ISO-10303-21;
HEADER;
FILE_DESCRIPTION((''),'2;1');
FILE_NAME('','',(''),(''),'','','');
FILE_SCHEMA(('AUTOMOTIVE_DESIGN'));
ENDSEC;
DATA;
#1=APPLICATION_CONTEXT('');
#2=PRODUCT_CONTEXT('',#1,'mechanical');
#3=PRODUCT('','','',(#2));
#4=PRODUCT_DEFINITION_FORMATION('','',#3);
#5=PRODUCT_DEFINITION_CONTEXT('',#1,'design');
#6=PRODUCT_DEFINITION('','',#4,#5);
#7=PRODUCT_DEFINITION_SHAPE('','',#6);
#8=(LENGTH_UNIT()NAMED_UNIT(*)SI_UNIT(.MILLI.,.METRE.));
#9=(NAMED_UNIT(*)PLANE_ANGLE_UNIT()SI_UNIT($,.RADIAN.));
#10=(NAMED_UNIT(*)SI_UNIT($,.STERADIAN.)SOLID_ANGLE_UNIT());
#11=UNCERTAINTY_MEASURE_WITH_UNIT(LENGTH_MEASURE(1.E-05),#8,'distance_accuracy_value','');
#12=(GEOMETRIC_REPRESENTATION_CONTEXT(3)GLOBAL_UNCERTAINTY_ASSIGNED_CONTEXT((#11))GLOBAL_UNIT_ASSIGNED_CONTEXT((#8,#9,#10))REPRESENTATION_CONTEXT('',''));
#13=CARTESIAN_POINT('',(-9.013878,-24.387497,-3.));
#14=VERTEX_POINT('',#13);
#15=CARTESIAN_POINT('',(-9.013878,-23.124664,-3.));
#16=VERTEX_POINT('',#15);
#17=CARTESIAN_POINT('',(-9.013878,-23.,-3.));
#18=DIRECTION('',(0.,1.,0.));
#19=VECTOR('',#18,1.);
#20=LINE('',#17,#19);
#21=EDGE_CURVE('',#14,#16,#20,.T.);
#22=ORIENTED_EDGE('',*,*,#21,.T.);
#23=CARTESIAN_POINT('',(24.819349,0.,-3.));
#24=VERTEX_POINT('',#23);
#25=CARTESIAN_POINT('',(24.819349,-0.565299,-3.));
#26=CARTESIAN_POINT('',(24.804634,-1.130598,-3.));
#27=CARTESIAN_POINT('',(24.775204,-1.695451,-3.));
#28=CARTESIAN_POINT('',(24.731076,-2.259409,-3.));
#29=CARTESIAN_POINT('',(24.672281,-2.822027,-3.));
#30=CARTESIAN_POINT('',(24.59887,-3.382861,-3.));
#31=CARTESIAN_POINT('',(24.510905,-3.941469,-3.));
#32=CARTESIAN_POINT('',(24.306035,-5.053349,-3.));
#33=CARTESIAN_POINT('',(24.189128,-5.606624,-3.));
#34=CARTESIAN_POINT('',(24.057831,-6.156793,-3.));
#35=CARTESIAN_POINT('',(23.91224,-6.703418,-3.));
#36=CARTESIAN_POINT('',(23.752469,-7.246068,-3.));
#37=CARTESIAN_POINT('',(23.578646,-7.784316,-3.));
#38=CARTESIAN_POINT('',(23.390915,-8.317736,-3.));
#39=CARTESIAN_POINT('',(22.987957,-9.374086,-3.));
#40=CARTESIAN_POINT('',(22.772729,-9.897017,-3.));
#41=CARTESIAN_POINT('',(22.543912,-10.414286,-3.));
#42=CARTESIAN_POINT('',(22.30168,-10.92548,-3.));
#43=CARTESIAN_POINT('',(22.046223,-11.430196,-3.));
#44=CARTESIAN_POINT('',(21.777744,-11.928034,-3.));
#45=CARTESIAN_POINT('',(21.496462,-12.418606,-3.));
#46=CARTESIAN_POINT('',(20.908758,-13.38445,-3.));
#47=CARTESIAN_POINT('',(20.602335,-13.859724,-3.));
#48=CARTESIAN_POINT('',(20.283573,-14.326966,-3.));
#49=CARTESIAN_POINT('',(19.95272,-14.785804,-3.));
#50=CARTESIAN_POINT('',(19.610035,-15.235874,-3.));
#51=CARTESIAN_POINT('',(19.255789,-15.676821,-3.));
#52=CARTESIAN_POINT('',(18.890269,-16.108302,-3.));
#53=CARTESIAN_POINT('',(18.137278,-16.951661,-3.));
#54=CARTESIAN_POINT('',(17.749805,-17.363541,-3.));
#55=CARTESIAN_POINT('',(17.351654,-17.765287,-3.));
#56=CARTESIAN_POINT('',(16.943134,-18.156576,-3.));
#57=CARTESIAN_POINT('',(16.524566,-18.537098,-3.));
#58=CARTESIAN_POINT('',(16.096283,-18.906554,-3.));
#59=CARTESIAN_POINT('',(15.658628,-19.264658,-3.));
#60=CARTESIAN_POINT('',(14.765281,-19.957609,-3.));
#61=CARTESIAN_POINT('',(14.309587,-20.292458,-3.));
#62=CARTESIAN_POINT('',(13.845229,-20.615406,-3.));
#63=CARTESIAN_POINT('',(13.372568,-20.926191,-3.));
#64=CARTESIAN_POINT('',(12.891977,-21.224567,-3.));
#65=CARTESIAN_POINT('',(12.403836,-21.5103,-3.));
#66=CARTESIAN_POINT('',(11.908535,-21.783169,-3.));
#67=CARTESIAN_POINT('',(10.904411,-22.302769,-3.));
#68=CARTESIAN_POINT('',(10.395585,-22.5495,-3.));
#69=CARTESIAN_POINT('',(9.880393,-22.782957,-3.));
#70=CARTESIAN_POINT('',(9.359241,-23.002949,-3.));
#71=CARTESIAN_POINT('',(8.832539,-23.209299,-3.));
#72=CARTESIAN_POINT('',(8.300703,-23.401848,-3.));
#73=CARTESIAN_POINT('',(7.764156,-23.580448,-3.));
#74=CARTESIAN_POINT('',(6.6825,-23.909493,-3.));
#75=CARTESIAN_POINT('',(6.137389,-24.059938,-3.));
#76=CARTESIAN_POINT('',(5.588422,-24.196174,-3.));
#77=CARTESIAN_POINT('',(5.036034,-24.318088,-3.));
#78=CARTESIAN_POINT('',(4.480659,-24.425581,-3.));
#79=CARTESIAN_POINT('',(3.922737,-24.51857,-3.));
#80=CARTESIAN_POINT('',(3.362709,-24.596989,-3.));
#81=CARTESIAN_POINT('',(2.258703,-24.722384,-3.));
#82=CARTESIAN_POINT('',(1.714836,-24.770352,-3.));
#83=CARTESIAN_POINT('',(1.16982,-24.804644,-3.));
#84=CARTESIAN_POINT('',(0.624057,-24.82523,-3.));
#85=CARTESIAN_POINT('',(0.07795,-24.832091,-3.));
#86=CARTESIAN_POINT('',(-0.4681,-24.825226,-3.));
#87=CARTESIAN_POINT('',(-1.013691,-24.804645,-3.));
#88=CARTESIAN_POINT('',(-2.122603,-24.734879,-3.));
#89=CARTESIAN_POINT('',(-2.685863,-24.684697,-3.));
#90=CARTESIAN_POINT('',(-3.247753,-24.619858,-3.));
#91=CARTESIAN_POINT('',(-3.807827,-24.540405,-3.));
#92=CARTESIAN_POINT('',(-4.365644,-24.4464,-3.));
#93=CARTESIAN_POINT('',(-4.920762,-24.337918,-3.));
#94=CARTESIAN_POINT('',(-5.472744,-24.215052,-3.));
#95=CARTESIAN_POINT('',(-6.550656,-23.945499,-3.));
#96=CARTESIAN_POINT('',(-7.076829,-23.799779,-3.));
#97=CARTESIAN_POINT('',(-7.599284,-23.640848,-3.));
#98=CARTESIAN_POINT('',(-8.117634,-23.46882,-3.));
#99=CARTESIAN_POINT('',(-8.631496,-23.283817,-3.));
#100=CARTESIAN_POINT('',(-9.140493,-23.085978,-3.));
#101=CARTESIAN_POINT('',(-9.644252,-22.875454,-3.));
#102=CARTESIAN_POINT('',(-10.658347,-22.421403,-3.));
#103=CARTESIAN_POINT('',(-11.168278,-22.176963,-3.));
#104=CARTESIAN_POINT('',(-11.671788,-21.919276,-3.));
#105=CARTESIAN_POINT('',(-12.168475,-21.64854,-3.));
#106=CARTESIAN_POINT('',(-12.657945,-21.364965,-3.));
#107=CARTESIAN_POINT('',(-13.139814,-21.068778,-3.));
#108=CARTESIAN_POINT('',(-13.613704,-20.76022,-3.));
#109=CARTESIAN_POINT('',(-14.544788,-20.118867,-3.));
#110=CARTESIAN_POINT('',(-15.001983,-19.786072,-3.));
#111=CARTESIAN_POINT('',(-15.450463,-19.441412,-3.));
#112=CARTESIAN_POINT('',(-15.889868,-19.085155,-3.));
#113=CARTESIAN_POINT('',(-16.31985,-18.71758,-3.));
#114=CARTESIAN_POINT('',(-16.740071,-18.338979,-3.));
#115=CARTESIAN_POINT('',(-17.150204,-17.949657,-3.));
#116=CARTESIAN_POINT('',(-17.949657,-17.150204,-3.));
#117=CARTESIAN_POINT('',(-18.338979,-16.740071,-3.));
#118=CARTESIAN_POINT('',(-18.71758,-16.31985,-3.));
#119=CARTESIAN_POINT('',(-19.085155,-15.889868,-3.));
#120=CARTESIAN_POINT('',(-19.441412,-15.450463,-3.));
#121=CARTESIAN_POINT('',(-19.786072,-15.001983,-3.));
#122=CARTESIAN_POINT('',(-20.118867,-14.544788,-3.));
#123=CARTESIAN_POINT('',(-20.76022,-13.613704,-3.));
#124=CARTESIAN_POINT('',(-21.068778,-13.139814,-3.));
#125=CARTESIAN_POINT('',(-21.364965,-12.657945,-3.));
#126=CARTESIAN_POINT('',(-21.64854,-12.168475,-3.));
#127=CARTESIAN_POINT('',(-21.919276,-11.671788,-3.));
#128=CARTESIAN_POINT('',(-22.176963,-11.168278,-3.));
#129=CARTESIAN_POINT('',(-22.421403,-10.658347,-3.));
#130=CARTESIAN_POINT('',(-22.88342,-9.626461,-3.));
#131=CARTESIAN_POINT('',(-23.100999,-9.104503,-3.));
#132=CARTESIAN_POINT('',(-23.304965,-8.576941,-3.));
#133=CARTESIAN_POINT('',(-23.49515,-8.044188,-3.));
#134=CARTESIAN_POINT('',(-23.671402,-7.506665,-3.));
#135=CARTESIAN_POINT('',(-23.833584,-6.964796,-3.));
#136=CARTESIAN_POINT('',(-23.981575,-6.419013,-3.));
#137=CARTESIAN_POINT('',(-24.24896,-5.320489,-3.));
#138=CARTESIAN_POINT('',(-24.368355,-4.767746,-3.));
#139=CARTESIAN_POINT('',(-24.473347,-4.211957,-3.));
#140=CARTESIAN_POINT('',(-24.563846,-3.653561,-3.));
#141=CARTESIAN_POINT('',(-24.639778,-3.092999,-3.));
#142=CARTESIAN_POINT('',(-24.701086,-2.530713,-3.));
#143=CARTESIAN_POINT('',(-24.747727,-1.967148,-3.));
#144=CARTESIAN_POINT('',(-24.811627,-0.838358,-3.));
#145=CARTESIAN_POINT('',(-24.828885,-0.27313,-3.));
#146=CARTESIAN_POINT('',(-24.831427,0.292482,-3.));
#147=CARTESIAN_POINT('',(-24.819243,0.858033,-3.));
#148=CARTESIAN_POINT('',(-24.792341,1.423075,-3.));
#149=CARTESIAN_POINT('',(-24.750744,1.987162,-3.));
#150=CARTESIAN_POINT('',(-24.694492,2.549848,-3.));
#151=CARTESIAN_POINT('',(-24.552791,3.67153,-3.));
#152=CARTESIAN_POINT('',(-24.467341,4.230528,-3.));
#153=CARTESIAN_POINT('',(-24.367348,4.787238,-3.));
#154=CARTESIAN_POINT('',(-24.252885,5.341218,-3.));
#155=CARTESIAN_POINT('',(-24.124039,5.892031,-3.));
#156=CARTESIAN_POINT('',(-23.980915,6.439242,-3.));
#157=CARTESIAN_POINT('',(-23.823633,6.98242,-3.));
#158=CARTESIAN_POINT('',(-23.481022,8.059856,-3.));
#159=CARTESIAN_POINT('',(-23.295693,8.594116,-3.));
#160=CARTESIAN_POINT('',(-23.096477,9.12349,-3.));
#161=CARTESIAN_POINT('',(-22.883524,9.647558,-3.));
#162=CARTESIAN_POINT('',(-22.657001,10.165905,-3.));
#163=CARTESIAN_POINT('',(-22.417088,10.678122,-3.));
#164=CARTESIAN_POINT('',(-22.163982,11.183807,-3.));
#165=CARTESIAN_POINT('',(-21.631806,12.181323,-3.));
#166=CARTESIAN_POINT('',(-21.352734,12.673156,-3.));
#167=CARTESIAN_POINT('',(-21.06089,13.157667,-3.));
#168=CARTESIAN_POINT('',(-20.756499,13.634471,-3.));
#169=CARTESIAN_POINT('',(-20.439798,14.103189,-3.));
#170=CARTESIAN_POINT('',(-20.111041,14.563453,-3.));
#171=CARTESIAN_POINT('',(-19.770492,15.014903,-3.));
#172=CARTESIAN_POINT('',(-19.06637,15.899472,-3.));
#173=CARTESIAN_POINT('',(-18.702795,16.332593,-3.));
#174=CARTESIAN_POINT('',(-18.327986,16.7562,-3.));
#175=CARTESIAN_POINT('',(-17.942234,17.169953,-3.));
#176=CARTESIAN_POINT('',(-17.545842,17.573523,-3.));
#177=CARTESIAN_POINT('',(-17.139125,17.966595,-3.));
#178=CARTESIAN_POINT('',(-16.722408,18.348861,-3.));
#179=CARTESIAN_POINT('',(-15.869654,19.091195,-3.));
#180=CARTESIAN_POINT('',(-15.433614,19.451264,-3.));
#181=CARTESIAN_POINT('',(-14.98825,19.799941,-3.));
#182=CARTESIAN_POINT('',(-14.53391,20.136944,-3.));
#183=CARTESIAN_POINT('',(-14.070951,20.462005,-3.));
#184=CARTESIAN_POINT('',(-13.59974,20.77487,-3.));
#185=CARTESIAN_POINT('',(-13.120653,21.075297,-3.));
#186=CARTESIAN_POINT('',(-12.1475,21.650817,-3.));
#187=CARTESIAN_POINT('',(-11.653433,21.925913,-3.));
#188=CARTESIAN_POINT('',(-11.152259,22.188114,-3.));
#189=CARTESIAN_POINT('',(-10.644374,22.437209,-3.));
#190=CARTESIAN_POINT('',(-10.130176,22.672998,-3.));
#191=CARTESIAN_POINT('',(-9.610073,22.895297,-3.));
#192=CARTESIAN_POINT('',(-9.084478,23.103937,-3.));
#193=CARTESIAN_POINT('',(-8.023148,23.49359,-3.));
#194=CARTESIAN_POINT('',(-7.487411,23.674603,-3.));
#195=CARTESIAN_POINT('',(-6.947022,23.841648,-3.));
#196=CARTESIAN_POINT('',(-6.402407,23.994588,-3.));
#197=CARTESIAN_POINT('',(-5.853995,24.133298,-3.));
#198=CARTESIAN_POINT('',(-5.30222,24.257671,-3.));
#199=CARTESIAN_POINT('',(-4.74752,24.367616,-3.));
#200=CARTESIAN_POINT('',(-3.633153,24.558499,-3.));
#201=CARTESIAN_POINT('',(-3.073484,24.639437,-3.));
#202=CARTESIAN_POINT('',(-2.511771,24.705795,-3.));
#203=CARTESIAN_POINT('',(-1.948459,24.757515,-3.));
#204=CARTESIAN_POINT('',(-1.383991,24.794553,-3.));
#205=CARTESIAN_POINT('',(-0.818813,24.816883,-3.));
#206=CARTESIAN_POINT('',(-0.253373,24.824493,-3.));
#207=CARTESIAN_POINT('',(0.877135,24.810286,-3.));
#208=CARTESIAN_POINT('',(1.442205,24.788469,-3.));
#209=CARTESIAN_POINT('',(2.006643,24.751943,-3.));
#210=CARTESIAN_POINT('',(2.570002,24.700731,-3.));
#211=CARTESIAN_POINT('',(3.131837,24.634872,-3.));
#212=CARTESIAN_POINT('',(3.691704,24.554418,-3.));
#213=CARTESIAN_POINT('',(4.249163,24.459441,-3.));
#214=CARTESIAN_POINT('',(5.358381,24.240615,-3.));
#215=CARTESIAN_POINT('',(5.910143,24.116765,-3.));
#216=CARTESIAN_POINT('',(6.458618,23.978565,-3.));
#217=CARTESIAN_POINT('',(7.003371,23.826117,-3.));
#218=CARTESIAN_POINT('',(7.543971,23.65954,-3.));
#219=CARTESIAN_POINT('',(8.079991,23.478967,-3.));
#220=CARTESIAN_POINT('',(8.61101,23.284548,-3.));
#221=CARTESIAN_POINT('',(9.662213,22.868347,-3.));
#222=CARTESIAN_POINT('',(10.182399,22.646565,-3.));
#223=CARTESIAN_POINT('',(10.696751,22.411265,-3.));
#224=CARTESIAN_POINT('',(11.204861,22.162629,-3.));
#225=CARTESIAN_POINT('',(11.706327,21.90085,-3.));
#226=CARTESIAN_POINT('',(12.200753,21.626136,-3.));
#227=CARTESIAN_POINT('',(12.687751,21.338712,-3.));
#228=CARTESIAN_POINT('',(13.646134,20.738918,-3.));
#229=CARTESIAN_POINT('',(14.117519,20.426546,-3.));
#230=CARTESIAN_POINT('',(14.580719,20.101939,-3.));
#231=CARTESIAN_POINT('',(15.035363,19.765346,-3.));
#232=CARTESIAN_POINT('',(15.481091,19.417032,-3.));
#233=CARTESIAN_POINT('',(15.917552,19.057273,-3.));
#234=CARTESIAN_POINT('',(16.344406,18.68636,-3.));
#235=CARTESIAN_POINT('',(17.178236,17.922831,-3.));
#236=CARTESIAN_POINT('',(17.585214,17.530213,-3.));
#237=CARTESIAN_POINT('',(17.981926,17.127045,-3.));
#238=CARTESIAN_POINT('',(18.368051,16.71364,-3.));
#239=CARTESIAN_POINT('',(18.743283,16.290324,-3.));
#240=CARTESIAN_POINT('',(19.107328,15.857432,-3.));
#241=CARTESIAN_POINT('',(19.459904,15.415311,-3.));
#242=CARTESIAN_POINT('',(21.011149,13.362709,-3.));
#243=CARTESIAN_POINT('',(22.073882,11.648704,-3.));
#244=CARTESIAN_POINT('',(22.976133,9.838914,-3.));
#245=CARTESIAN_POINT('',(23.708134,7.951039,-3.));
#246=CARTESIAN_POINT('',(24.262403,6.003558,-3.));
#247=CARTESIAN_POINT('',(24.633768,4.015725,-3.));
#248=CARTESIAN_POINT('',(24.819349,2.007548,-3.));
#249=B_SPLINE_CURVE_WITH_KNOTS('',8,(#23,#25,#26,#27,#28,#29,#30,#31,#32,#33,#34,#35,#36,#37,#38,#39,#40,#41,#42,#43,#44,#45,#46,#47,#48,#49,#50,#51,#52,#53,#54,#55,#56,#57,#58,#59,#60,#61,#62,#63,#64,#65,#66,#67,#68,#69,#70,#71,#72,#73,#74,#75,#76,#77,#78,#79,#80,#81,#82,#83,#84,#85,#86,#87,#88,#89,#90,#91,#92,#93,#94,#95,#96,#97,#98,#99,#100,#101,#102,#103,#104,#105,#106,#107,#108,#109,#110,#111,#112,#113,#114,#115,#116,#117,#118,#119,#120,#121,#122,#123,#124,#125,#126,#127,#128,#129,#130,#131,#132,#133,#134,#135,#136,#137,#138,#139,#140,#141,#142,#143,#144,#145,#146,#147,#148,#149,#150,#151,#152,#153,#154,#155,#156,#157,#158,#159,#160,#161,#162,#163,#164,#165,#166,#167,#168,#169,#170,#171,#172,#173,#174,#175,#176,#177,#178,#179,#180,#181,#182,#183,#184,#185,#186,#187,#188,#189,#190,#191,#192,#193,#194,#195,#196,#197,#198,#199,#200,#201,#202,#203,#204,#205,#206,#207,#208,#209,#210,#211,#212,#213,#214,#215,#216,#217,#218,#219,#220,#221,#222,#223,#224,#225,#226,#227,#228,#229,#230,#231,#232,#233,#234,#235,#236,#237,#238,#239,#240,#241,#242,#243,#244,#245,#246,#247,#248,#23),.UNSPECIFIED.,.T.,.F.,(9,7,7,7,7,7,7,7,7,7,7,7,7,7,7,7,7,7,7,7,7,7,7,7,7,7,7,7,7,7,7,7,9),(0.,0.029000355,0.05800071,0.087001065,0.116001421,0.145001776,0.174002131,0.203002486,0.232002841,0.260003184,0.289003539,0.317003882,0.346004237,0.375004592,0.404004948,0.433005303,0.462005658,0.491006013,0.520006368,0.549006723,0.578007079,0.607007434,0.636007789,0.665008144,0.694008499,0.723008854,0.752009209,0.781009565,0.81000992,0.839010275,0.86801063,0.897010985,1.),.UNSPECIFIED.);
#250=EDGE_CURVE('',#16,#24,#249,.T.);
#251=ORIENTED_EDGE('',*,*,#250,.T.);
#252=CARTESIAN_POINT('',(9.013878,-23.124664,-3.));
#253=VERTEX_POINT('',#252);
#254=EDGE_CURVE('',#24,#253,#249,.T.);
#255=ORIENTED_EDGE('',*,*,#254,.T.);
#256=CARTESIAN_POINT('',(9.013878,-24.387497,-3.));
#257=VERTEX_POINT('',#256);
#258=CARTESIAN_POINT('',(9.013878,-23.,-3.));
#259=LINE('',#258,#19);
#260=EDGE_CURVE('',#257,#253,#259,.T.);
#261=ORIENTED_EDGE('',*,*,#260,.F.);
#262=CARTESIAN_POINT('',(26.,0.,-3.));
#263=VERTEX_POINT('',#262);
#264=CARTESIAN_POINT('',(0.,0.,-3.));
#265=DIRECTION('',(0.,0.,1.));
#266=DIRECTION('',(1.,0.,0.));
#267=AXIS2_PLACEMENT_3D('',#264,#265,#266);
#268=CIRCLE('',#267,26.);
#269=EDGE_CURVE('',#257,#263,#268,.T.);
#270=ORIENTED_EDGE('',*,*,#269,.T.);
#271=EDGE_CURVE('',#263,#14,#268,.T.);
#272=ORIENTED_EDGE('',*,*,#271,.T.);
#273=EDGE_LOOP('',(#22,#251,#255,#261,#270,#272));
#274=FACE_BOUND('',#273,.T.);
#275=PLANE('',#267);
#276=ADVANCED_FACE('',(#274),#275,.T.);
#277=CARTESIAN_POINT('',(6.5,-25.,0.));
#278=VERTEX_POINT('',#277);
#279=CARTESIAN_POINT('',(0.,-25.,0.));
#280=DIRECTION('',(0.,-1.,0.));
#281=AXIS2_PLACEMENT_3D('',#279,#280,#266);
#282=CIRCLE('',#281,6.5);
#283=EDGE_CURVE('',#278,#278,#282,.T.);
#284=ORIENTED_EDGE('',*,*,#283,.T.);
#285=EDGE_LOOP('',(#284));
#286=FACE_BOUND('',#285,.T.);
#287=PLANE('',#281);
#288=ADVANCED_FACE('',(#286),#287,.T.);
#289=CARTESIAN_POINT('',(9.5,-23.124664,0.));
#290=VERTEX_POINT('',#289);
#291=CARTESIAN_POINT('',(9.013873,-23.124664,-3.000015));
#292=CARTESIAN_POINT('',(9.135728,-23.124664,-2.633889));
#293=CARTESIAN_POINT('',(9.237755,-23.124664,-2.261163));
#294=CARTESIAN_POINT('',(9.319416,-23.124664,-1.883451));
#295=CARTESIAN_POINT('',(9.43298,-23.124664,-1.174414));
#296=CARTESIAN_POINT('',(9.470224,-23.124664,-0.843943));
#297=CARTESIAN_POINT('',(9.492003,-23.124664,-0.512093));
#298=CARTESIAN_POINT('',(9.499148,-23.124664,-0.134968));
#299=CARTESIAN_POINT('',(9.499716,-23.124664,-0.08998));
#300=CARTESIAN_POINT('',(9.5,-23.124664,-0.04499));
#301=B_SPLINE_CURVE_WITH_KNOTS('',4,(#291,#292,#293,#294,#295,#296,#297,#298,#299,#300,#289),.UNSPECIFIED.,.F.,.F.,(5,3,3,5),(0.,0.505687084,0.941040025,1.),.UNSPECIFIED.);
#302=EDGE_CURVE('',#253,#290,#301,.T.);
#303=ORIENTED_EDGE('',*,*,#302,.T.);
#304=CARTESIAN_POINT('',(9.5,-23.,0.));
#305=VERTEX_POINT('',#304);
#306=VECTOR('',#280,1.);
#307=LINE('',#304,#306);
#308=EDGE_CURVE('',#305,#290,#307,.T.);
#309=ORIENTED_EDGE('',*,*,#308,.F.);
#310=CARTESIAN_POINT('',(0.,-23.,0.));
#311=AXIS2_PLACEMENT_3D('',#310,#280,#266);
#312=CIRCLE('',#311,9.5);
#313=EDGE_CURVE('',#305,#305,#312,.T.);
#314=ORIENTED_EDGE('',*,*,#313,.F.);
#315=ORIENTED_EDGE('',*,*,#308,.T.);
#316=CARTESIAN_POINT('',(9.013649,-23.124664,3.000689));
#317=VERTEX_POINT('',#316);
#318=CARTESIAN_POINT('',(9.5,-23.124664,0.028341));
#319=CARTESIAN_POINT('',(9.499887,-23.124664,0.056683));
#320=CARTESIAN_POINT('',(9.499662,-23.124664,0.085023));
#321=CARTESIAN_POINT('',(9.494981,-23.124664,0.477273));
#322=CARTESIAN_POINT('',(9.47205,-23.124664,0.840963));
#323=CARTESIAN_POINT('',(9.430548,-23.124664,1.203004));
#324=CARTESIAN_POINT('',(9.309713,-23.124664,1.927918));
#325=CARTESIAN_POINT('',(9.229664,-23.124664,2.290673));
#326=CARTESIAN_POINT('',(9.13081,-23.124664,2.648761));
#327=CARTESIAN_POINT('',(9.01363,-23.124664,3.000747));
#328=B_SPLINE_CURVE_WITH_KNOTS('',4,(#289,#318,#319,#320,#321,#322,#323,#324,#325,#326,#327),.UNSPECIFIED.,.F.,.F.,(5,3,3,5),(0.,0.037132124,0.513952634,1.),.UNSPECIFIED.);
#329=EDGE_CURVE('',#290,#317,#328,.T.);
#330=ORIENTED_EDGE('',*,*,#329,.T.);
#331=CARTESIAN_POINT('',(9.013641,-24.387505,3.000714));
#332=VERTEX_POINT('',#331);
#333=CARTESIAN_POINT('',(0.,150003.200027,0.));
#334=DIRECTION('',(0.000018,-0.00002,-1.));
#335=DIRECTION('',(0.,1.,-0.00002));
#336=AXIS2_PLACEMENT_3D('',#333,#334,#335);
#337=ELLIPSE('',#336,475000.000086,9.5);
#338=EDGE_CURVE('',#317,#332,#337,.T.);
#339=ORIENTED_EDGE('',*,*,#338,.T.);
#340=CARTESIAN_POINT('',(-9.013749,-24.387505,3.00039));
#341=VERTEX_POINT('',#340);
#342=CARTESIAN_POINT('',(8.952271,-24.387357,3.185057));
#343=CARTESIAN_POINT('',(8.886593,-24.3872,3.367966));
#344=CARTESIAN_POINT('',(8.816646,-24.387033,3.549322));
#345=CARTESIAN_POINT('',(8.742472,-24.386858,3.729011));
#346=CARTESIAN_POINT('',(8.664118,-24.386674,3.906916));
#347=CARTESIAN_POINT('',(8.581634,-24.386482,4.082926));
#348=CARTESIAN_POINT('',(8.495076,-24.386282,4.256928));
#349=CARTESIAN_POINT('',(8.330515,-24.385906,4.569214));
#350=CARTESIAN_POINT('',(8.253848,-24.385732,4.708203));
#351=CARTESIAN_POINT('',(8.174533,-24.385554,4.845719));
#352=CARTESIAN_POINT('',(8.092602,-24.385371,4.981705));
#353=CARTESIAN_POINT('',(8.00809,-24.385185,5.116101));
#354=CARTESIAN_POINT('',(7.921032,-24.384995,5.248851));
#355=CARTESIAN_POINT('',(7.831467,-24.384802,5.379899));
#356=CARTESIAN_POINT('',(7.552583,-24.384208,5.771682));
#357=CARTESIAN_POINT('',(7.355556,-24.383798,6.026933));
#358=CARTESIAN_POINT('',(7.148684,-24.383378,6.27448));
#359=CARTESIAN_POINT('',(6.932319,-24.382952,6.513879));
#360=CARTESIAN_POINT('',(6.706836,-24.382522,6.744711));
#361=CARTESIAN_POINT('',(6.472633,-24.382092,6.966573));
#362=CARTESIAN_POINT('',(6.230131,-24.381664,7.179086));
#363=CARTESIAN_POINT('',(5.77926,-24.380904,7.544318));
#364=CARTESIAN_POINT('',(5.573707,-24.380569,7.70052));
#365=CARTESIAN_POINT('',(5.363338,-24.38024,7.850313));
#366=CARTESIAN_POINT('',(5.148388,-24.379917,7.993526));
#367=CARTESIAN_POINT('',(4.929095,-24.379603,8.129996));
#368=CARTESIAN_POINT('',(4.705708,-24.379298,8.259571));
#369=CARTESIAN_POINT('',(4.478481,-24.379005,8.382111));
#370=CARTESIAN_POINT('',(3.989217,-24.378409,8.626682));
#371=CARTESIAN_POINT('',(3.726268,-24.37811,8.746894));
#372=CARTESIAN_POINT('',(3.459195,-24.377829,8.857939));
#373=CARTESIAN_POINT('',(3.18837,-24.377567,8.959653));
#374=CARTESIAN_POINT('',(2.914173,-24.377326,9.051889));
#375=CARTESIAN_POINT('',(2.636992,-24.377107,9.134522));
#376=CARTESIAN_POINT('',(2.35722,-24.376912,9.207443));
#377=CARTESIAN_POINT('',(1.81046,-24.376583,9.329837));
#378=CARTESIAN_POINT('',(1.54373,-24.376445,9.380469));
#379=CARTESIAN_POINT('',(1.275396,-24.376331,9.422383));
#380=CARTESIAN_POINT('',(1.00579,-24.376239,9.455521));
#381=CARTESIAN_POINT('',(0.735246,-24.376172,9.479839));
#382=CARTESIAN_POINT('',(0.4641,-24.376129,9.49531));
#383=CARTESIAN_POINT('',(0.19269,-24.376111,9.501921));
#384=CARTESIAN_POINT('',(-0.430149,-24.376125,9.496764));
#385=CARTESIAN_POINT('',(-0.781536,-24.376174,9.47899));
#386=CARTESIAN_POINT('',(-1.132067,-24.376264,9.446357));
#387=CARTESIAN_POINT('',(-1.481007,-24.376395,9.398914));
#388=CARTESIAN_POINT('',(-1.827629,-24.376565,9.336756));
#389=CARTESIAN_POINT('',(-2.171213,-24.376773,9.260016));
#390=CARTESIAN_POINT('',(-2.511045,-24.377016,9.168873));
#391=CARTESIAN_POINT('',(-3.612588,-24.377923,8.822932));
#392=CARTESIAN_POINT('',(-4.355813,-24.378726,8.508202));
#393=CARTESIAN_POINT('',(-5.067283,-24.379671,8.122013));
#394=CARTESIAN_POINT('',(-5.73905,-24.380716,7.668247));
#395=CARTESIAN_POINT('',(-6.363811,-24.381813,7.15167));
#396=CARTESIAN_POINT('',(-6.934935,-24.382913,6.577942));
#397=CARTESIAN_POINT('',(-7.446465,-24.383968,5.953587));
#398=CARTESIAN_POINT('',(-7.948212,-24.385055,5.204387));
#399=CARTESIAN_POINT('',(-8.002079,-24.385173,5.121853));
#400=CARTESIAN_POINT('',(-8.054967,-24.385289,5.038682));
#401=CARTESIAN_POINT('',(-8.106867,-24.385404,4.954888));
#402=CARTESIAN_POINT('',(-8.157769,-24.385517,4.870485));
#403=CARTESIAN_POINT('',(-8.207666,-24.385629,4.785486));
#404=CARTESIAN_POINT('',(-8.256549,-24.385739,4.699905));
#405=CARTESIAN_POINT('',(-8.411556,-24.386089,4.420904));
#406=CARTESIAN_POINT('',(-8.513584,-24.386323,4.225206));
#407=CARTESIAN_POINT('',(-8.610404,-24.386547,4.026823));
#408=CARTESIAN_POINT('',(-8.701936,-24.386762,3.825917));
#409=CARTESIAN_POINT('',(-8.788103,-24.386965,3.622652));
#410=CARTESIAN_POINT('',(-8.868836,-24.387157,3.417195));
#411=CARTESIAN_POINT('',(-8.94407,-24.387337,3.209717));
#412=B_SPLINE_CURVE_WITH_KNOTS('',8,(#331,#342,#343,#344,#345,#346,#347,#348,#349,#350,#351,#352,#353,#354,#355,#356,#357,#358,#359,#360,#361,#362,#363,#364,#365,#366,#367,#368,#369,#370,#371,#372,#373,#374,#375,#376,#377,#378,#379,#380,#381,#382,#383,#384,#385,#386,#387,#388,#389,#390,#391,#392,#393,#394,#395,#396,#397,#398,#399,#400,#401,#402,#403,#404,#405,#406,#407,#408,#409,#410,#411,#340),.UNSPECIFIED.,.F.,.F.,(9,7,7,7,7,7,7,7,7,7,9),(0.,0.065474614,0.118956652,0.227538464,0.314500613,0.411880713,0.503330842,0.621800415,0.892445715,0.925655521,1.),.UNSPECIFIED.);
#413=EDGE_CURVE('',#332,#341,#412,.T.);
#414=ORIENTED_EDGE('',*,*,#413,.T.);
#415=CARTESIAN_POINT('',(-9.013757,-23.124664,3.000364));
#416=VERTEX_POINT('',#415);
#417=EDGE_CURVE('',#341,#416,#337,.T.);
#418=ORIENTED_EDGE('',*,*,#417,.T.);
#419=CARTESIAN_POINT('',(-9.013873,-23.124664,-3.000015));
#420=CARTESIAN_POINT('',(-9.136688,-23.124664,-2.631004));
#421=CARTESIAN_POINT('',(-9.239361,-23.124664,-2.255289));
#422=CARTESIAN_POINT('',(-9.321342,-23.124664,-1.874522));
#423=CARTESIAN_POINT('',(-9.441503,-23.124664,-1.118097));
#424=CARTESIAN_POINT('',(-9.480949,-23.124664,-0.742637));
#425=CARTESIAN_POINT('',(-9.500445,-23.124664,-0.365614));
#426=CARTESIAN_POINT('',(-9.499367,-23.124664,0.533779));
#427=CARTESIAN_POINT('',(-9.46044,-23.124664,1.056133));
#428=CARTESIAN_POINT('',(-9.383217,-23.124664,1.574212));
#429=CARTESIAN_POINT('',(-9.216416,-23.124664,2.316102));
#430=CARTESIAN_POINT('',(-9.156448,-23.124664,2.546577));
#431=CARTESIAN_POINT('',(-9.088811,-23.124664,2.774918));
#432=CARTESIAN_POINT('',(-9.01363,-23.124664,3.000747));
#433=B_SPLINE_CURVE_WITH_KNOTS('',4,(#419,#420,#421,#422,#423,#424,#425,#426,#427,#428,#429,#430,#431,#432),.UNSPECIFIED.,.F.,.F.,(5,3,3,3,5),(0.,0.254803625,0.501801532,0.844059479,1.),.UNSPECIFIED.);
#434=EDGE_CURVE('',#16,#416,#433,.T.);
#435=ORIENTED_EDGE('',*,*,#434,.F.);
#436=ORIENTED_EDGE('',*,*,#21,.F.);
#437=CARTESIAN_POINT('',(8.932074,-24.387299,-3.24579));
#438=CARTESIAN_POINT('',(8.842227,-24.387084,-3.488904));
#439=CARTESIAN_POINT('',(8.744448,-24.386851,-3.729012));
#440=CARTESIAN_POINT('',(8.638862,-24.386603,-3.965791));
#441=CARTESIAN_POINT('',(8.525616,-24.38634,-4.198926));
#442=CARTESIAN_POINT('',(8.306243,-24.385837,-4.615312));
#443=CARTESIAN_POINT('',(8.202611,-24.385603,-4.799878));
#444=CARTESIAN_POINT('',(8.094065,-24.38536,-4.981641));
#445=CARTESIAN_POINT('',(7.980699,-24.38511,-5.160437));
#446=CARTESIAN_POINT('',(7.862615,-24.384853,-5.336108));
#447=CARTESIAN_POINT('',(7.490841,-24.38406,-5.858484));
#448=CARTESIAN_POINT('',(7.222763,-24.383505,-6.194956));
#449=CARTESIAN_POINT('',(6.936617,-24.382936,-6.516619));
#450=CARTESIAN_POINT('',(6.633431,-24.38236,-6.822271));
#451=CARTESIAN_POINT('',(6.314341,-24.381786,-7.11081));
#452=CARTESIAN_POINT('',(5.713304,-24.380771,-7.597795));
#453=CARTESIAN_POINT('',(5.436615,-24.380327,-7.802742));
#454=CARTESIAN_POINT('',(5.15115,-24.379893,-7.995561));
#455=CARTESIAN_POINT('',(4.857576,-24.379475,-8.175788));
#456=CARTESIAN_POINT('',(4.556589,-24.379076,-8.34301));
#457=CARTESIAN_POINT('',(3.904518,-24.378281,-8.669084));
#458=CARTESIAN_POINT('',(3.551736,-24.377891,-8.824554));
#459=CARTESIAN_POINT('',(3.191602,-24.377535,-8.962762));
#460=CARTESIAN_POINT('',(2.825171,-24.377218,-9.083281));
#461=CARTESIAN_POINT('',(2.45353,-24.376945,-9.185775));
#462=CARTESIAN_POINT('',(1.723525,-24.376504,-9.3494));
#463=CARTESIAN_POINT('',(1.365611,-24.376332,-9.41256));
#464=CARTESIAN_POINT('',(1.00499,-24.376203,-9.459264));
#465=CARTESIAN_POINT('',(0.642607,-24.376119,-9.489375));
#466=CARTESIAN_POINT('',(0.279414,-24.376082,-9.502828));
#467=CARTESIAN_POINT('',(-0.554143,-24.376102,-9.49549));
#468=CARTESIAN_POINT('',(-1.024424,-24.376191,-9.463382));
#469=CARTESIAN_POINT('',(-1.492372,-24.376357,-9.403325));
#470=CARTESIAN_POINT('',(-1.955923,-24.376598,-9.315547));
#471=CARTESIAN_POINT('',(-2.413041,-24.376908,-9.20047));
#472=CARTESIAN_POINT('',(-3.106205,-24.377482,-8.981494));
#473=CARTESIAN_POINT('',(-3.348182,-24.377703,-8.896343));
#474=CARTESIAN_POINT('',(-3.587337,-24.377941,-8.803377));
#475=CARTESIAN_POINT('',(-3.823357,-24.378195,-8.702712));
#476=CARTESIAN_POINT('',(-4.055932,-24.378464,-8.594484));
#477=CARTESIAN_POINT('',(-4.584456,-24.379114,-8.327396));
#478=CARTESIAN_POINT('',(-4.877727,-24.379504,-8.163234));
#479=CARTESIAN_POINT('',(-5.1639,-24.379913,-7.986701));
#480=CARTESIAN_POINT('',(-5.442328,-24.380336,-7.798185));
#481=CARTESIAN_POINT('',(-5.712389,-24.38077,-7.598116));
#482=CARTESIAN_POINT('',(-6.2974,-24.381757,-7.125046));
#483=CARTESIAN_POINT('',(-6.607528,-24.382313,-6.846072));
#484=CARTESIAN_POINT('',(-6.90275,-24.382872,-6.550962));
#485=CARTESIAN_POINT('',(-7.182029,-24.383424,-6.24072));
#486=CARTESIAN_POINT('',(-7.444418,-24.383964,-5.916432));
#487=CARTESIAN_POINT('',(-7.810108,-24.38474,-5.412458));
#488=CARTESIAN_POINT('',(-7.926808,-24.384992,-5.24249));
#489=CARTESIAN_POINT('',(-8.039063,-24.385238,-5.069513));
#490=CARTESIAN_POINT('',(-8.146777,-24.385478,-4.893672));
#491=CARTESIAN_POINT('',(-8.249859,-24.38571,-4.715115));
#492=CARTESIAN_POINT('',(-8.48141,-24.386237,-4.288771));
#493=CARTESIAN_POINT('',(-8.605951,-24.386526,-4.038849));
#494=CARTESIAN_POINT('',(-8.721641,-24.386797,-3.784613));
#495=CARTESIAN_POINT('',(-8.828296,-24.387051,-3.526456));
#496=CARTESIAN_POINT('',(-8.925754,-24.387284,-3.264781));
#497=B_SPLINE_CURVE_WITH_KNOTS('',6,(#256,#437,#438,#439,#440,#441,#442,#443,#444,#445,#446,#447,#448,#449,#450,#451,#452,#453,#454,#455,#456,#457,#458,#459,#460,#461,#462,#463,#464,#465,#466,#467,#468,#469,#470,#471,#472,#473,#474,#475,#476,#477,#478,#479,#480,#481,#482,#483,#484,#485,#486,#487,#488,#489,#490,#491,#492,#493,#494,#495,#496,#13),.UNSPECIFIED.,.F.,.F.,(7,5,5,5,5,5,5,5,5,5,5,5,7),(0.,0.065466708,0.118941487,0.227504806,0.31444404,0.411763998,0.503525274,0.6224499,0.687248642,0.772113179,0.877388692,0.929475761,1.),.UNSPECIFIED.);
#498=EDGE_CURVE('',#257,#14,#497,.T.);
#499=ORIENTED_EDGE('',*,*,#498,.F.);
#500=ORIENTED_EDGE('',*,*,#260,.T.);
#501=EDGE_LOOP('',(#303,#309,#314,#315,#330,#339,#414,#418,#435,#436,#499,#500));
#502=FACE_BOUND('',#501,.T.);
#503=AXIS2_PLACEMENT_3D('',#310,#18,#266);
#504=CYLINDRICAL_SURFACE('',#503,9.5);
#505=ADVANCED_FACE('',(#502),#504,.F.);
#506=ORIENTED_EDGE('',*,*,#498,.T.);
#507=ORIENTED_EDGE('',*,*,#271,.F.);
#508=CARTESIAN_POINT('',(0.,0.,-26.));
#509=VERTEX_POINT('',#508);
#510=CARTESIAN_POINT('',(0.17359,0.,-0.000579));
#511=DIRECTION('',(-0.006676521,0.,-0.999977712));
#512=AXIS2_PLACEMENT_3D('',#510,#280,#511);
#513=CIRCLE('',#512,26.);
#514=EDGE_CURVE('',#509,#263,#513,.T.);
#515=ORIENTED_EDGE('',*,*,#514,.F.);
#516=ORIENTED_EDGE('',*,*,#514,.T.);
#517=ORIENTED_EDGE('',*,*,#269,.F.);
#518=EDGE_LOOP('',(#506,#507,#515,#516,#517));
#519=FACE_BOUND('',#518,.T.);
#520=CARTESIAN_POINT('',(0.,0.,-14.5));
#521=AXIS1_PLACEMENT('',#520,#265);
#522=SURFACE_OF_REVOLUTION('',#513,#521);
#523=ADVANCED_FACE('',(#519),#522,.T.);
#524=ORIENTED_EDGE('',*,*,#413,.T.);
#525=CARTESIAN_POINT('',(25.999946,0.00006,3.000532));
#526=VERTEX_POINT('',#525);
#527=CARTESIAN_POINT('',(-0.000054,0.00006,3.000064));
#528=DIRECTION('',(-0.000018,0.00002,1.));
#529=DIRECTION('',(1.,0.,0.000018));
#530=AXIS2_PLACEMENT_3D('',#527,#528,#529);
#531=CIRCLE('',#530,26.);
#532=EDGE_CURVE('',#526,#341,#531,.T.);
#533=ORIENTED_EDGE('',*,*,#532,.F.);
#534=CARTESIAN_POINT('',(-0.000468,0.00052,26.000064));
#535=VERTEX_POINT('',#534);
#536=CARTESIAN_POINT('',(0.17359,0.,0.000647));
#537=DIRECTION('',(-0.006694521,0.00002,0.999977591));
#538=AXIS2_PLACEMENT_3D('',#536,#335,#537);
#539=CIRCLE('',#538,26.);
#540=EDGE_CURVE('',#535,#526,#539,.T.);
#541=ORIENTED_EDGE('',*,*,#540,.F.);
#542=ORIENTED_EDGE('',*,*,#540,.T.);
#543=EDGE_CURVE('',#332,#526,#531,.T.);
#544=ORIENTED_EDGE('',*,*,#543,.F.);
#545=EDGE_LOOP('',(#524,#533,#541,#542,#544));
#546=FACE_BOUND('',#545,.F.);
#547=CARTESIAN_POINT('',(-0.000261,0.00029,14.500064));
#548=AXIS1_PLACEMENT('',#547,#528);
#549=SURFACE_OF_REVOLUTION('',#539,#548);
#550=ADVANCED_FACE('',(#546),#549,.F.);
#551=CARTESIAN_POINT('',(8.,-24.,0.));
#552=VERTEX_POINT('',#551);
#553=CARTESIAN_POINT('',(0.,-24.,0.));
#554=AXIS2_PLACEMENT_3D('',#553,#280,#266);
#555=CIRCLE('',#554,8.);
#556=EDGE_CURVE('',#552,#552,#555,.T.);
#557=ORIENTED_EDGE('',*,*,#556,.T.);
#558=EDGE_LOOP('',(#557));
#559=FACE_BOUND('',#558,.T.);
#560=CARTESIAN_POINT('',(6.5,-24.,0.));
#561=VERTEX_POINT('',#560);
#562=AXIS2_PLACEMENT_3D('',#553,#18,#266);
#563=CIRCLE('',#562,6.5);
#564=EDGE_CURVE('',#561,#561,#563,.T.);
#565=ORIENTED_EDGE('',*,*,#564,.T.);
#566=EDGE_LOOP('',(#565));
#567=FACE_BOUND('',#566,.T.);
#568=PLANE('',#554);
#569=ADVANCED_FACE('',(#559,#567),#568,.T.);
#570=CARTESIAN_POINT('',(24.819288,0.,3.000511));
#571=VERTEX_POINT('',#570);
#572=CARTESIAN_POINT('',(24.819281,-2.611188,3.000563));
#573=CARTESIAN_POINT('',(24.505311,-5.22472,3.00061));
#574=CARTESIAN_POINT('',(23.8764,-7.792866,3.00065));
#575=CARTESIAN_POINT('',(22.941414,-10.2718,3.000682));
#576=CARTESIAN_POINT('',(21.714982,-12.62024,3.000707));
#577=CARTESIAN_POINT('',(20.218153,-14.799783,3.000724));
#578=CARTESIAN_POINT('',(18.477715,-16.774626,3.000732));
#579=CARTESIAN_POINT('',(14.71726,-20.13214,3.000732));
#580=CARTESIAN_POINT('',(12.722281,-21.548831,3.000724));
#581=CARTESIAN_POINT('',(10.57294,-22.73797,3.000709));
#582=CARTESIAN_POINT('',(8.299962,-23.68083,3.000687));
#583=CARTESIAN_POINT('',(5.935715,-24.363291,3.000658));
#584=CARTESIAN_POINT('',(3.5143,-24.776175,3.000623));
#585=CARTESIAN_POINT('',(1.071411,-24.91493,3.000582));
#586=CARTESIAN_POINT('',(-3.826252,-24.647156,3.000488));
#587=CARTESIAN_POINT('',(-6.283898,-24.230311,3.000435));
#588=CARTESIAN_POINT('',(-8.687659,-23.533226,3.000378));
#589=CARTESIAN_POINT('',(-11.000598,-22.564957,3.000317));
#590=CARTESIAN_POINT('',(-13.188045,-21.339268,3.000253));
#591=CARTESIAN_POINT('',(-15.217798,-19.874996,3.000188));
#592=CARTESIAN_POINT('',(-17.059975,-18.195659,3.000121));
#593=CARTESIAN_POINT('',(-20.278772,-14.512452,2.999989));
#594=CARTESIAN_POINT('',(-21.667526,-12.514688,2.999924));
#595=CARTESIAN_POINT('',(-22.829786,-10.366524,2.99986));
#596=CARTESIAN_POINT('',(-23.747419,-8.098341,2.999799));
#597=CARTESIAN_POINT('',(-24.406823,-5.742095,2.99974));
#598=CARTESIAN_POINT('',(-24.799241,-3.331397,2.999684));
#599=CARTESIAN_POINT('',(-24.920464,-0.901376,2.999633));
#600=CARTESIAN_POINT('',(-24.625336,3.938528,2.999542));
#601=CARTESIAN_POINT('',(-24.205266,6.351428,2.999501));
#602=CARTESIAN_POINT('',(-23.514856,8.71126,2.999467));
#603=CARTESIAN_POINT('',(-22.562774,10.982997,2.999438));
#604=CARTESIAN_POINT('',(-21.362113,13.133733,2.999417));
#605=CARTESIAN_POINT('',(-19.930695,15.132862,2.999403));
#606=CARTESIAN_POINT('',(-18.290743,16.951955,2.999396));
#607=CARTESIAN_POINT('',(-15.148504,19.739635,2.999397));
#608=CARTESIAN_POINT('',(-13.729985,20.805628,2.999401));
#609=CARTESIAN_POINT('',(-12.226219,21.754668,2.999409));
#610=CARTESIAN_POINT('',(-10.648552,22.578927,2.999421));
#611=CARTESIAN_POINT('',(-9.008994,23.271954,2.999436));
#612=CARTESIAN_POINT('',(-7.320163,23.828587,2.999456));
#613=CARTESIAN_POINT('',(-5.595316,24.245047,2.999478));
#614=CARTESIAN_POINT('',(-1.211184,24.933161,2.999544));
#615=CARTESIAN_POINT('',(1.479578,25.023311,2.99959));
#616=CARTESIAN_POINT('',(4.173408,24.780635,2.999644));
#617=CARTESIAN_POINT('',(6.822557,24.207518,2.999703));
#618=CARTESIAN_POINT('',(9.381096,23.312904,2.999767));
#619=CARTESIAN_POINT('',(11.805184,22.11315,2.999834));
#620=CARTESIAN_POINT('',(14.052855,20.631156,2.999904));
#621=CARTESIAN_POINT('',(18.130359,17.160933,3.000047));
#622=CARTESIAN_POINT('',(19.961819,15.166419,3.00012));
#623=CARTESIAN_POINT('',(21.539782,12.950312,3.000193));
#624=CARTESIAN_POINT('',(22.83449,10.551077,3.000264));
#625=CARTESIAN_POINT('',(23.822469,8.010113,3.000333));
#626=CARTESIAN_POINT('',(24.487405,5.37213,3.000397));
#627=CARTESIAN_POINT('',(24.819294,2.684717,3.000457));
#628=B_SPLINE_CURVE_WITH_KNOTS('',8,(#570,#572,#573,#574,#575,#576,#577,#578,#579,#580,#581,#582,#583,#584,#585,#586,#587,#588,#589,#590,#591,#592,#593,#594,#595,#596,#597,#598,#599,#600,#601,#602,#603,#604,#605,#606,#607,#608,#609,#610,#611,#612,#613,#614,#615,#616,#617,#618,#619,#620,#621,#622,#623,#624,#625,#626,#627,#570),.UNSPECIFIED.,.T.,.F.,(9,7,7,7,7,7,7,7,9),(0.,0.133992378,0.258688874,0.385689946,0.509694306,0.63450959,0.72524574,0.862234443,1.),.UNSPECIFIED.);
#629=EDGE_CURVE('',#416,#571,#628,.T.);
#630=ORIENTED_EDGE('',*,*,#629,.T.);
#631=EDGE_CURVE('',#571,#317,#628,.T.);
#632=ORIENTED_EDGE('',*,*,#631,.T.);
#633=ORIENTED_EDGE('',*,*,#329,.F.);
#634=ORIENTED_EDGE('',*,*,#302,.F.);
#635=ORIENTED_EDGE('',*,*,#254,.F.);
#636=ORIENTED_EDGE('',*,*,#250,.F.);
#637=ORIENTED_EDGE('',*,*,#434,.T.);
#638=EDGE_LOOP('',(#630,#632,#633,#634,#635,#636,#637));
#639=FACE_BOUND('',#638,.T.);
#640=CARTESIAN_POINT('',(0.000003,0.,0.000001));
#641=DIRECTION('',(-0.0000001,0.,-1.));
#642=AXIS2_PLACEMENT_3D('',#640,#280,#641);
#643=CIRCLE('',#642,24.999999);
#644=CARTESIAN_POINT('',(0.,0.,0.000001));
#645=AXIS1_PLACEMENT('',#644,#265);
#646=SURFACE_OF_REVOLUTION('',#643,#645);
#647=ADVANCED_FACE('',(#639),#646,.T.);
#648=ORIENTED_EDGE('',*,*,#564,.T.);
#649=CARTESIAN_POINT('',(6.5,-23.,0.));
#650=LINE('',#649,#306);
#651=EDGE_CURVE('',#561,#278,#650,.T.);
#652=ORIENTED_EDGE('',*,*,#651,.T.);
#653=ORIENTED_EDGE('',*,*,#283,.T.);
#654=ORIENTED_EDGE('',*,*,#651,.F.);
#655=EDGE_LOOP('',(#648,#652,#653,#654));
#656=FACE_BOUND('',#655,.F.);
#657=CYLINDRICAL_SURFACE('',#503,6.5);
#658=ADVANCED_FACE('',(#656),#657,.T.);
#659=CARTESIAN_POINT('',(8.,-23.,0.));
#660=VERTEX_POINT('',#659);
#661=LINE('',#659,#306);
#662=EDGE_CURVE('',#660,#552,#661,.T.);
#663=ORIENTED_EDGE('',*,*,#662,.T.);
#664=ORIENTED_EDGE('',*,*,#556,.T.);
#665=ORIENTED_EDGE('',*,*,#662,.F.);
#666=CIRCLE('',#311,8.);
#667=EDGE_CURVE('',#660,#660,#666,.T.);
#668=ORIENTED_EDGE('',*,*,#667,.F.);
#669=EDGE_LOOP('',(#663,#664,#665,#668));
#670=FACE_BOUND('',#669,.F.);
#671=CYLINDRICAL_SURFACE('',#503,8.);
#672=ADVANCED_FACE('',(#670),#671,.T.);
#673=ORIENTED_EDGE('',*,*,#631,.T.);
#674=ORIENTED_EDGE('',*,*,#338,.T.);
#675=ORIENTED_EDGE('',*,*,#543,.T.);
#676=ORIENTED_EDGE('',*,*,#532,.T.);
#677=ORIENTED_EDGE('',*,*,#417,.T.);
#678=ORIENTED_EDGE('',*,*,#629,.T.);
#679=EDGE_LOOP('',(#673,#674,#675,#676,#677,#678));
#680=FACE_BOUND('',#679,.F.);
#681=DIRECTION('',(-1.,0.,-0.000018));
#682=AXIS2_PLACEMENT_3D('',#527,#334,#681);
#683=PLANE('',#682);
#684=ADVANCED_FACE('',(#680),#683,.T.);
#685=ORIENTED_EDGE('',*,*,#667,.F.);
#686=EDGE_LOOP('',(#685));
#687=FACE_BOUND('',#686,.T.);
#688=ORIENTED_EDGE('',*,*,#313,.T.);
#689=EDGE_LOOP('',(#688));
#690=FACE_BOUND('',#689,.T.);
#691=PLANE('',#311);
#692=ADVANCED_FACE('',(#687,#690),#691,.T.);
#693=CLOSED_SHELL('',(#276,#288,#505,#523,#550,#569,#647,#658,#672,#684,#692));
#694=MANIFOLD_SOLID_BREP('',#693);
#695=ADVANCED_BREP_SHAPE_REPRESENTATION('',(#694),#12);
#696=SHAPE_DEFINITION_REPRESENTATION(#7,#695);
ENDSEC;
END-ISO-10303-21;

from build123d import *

# Parameters (mm, degrees)
F5_R      = 9.5
F6_DEPTH  = 20
F7_R      = 8
F8_DEPTH  = 1
F9_R      = 6.5
F10_DEPTH = 2


# Not quite as in the source:
# - ends of sketch curves that miss each other by under 0.0002 mm in the source are joined
# - a pattern or mirror of a feature is missing from the dataset's text; its kind, count and spacing are read off the source's solid


with BuildPart() as f1:
    # F0 (on Front) → F1 (revolve)
    with BuildSketch(Plane.XZ):
        with BuildLine():
            Line((0, 25), (0, -24.9999989992))
            ThreePointArc((0, -24.9999989992), (25.0000020016, 0), (0, 25))
        make_face()
    revolve(axis=Axis((0, 0, 5.004e-07), (0, 0, 1)))

    # F2 (on Front) → F3 (revolve)
    with BuildSketch(Plane.XZ):
        with BuildLine():
            Line((0, -3), (0, -26))
            ThreePointArc((0, -26), (17.4005104893, -19.4744901184), (26, -3))
            Line((26, -3), (0, -3))
        make_face()
    f3 = revolve(axis=Axis((0, 0, -14.5), (0, 0, 1)))

    # F3_copies: F3 across plane
    add(f3.mirror(Plane(origin=(0, 0, 3.2e-05), x_dir=(0, 1, -1e-05), z_dir=(-9e-06, 1e-05, 1))))

    # F5 (on offset) → F6 (cut)
    with BuildSketch(Plane.XZ.offset(23)):
        Circle(F5_R)
    extrude(amount=F6_DEPTH, mode=Mode.SUBTRACT)

    # F7 (on offset) → F8 (join)
    with BuildSketch(Plane.XZ.offset(23)):
        Circle(F7_R)
    extrude(amount=F8_DEPTH)

    # F9 (on offset) → F10 (join)
    with BuildSketch(Plane.XZ.offset(23)):
        Circle(F9_R)
    extrude(amount=F10_DEPTH)


solid = f1.part
